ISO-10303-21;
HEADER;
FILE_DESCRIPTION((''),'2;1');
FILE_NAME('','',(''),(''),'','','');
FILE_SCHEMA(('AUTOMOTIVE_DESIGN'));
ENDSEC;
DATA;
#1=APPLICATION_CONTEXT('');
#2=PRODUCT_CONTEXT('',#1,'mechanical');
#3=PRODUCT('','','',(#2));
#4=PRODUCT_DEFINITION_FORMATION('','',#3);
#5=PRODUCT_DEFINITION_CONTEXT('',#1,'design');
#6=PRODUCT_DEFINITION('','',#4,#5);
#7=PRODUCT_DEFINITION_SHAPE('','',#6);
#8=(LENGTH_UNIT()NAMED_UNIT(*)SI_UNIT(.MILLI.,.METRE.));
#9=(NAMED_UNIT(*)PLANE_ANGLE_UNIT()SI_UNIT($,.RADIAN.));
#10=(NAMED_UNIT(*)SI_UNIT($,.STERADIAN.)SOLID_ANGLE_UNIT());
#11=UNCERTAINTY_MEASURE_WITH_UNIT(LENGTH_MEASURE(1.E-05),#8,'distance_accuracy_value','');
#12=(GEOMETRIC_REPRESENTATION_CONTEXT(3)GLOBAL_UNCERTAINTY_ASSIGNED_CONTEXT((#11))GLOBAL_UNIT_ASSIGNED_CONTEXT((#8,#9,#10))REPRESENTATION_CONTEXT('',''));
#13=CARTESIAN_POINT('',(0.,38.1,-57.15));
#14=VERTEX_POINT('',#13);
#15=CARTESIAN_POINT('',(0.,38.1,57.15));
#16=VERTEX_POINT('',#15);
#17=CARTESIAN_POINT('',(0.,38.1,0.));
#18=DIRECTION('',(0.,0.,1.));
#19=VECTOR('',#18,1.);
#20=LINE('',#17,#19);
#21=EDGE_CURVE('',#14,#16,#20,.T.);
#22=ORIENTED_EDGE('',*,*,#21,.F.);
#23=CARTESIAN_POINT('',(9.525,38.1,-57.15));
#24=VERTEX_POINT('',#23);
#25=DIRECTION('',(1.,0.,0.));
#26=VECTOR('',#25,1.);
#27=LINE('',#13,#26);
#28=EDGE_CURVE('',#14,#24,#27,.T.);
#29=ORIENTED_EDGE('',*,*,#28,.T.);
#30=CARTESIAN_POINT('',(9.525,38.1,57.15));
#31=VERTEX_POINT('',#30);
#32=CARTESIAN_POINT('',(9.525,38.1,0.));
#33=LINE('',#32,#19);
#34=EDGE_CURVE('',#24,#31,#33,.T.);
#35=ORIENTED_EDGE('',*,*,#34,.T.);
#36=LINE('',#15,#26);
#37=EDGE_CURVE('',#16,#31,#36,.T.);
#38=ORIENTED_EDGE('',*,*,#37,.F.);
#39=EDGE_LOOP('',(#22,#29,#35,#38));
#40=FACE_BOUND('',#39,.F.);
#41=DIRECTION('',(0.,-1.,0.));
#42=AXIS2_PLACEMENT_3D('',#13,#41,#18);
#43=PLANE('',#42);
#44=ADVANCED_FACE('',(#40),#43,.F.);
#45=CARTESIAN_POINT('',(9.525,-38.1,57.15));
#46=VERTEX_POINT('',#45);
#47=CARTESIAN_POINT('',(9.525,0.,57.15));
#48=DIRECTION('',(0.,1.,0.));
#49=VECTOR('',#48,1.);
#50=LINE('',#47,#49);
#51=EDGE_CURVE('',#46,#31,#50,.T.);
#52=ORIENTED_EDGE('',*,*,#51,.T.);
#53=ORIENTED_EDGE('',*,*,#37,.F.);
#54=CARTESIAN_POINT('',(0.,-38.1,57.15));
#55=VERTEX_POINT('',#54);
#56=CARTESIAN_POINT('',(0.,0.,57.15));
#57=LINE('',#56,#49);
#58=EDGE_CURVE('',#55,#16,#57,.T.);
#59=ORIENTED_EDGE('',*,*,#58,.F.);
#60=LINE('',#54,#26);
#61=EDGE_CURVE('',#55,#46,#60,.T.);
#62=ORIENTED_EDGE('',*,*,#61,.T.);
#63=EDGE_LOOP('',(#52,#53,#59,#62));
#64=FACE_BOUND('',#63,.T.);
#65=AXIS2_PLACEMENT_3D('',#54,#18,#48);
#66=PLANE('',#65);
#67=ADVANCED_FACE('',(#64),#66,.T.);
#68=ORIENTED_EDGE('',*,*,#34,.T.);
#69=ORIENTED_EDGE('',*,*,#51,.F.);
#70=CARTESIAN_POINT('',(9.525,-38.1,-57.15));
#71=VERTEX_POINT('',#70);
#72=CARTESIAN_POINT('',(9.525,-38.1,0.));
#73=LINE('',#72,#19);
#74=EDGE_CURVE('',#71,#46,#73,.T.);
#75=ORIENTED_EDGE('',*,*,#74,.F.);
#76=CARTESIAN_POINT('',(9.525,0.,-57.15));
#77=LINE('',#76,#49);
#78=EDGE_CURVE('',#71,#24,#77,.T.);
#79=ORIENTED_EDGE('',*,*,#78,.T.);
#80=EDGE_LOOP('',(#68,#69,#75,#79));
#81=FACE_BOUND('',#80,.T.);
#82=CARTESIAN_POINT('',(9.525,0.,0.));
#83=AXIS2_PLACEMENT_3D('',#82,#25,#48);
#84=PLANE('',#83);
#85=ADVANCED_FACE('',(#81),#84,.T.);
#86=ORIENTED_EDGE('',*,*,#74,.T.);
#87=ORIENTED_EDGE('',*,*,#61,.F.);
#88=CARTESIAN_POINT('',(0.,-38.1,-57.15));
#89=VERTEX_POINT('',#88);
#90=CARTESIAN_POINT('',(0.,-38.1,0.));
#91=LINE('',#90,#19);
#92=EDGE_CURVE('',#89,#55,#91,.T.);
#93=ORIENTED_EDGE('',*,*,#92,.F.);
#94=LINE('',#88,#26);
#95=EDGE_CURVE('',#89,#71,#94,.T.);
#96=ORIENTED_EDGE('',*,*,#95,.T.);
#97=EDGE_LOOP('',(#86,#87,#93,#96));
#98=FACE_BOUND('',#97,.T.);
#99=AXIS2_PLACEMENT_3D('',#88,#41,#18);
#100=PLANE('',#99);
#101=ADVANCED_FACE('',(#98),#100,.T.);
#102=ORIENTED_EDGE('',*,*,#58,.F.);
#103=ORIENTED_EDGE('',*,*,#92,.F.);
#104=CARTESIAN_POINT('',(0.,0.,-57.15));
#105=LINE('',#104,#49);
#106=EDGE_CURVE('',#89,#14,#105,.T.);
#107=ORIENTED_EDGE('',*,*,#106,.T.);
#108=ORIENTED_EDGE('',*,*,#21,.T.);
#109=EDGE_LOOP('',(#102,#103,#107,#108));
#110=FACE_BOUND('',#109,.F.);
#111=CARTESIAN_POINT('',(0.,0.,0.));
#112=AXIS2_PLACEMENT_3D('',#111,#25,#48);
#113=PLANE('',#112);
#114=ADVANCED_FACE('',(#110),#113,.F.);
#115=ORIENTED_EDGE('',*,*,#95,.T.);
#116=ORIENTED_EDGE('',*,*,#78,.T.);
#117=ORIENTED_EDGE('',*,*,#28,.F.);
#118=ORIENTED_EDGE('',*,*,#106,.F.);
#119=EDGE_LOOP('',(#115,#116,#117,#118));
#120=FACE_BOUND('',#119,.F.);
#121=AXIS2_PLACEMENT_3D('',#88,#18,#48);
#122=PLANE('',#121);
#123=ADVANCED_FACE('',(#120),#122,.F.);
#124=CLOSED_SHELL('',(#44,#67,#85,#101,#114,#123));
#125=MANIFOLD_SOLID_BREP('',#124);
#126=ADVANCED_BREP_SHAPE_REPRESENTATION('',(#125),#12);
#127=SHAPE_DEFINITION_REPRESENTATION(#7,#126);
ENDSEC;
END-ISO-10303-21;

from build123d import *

# Parameters (mm, degrees)
F0_W     = 76.2
F0_H     = 114.3
F1_DEPTH = 9.525


# Not quite as in the source:
# - a length typed as a fraction of an inch, garbled in the dataset ("3 / 203.2 mm" for 3/8 in), is restored


with BuildPart() as f1:
    # F0 (on Right) → F1 (new body)
    with BuildSketch(Plane.YZ):
        Rectangle(F0_W, F0_H)
    extrude(amount=F1_DEPTH)


solid = f1.part
